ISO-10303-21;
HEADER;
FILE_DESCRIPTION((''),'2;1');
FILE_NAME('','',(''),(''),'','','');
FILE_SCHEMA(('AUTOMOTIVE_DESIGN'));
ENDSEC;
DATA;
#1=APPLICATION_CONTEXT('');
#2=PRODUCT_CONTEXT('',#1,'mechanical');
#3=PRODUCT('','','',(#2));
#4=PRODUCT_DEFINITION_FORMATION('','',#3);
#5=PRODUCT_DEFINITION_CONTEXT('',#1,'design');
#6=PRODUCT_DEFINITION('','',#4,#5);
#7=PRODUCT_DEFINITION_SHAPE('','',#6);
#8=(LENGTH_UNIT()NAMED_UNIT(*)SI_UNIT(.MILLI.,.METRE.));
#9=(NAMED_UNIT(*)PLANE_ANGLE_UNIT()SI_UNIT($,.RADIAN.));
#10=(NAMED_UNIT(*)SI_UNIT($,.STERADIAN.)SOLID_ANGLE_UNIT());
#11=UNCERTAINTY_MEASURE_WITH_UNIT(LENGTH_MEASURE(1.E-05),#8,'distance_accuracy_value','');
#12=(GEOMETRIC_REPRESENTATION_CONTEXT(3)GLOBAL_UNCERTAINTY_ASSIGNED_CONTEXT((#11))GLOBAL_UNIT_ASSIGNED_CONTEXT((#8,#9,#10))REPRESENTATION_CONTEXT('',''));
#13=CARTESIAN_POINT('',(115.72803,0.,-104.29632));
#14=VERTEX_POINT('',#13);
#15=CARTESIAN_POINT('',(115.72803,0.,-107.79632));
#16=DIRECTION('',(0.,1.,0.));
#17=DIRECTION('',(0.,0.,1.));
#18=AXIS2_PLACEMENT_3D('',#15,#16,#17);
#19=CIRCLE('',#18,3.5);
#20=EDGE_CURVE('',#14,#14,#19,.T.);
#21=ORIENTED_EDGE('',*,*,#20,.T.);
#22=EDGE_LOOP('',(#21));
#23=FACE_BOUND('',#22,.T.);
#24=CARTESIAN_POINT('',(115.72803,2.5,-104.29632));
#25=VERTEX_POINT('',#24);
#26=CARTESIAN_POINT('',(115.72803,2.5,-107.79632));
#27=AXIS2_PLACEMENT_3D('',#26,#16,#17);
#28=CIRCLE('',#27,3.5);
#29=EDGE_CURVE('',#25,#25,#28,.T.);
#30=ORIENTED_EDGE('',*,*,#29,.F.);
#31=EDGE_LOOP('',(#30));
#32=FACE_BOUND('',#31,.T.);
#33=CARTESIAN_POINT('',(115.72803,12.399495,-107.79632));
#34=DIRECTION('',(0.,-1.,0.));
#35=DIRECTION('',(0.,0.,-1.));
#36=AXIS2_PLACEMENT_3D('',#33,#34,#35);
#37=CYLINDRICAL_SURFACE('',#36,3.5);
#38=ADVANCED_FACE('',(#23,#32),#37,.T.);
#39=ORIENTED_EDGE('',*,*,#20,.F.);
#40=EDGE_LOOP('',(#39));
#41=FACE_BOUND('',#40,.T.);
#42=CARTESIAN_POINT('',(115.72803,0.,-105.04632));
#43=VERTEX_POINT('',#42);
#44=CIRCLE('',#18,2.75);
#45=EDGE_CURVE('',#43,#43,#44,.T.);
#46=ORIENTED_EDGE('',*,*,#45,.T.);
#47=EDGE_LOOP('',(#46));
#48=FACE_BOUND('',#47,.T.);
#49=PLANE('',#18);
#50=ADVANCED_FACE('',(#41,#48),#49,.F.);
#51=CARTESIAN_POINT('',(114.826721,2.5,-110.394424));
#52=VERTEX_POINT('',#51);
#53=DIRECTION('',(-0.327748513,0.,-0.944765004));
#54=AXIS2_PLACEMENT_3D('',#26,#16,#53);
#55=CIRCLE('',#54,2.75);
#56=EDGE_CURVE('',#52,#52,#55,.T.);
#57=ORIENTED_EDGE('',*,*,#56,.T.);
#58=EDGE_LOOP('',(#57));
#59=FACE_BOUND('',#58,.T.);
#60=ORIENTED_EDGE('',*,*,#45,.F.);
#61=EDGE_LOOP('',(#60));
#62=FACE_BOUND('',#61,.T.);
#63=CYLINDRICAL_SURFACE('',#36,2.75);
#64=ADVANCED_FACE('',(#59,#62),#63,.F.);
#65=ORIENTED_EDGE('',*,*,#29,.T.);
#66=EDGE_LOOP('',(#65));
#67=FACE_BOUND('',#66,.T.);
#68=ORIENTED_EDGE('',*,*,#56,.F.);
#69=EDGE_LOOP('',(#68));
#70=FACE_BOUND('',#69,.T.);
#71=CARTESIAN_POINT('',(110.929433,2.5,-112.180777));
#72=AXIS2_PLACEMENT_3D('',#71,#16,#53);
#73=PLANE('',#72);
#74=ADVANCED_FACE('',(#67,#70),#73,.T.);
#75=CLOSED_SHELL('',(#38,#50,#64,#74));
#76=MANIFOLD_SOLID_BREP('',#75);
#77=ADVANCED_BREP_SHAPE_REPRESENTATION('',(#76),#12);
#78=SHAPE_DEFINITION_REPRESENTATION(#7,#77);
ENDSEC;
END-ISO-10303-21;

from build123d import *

# Parameters (mm, degrees)
BOSS_EXTRUDE1_OUTLINE_R   = 3.5
BOSS_EXTRUDE1_OUTLINE_R_2 = 2.75
BOSS_EXTRUDE1_DEPTH       = 2.5


# Read off the part's stored shape, not the designer's step: Boss-Extrude1
with BuildPart() as part:
    # Boss-Extrude1 outline → Boss-Extrude1 (new body)
    with BuildSketch(Plane(origin=(0, 0, 0), x_dir=(1, 0, 0), z_dir=(0, 1, 0))):
        with Locations((115.728029905, 107.796319891)):
            Circle(BOSS_EXTRUDE1_OUTLINE_R)
        with Locations((115.728029905, 107.796319891)):
            Circle(BOSS_EXTRUDE1_OUTLINE_R_2, mode=Mode.SUBTRACT)
    extrude(amount=BOSS_EXTRUDE1_DEPTH)


solid = part.part
